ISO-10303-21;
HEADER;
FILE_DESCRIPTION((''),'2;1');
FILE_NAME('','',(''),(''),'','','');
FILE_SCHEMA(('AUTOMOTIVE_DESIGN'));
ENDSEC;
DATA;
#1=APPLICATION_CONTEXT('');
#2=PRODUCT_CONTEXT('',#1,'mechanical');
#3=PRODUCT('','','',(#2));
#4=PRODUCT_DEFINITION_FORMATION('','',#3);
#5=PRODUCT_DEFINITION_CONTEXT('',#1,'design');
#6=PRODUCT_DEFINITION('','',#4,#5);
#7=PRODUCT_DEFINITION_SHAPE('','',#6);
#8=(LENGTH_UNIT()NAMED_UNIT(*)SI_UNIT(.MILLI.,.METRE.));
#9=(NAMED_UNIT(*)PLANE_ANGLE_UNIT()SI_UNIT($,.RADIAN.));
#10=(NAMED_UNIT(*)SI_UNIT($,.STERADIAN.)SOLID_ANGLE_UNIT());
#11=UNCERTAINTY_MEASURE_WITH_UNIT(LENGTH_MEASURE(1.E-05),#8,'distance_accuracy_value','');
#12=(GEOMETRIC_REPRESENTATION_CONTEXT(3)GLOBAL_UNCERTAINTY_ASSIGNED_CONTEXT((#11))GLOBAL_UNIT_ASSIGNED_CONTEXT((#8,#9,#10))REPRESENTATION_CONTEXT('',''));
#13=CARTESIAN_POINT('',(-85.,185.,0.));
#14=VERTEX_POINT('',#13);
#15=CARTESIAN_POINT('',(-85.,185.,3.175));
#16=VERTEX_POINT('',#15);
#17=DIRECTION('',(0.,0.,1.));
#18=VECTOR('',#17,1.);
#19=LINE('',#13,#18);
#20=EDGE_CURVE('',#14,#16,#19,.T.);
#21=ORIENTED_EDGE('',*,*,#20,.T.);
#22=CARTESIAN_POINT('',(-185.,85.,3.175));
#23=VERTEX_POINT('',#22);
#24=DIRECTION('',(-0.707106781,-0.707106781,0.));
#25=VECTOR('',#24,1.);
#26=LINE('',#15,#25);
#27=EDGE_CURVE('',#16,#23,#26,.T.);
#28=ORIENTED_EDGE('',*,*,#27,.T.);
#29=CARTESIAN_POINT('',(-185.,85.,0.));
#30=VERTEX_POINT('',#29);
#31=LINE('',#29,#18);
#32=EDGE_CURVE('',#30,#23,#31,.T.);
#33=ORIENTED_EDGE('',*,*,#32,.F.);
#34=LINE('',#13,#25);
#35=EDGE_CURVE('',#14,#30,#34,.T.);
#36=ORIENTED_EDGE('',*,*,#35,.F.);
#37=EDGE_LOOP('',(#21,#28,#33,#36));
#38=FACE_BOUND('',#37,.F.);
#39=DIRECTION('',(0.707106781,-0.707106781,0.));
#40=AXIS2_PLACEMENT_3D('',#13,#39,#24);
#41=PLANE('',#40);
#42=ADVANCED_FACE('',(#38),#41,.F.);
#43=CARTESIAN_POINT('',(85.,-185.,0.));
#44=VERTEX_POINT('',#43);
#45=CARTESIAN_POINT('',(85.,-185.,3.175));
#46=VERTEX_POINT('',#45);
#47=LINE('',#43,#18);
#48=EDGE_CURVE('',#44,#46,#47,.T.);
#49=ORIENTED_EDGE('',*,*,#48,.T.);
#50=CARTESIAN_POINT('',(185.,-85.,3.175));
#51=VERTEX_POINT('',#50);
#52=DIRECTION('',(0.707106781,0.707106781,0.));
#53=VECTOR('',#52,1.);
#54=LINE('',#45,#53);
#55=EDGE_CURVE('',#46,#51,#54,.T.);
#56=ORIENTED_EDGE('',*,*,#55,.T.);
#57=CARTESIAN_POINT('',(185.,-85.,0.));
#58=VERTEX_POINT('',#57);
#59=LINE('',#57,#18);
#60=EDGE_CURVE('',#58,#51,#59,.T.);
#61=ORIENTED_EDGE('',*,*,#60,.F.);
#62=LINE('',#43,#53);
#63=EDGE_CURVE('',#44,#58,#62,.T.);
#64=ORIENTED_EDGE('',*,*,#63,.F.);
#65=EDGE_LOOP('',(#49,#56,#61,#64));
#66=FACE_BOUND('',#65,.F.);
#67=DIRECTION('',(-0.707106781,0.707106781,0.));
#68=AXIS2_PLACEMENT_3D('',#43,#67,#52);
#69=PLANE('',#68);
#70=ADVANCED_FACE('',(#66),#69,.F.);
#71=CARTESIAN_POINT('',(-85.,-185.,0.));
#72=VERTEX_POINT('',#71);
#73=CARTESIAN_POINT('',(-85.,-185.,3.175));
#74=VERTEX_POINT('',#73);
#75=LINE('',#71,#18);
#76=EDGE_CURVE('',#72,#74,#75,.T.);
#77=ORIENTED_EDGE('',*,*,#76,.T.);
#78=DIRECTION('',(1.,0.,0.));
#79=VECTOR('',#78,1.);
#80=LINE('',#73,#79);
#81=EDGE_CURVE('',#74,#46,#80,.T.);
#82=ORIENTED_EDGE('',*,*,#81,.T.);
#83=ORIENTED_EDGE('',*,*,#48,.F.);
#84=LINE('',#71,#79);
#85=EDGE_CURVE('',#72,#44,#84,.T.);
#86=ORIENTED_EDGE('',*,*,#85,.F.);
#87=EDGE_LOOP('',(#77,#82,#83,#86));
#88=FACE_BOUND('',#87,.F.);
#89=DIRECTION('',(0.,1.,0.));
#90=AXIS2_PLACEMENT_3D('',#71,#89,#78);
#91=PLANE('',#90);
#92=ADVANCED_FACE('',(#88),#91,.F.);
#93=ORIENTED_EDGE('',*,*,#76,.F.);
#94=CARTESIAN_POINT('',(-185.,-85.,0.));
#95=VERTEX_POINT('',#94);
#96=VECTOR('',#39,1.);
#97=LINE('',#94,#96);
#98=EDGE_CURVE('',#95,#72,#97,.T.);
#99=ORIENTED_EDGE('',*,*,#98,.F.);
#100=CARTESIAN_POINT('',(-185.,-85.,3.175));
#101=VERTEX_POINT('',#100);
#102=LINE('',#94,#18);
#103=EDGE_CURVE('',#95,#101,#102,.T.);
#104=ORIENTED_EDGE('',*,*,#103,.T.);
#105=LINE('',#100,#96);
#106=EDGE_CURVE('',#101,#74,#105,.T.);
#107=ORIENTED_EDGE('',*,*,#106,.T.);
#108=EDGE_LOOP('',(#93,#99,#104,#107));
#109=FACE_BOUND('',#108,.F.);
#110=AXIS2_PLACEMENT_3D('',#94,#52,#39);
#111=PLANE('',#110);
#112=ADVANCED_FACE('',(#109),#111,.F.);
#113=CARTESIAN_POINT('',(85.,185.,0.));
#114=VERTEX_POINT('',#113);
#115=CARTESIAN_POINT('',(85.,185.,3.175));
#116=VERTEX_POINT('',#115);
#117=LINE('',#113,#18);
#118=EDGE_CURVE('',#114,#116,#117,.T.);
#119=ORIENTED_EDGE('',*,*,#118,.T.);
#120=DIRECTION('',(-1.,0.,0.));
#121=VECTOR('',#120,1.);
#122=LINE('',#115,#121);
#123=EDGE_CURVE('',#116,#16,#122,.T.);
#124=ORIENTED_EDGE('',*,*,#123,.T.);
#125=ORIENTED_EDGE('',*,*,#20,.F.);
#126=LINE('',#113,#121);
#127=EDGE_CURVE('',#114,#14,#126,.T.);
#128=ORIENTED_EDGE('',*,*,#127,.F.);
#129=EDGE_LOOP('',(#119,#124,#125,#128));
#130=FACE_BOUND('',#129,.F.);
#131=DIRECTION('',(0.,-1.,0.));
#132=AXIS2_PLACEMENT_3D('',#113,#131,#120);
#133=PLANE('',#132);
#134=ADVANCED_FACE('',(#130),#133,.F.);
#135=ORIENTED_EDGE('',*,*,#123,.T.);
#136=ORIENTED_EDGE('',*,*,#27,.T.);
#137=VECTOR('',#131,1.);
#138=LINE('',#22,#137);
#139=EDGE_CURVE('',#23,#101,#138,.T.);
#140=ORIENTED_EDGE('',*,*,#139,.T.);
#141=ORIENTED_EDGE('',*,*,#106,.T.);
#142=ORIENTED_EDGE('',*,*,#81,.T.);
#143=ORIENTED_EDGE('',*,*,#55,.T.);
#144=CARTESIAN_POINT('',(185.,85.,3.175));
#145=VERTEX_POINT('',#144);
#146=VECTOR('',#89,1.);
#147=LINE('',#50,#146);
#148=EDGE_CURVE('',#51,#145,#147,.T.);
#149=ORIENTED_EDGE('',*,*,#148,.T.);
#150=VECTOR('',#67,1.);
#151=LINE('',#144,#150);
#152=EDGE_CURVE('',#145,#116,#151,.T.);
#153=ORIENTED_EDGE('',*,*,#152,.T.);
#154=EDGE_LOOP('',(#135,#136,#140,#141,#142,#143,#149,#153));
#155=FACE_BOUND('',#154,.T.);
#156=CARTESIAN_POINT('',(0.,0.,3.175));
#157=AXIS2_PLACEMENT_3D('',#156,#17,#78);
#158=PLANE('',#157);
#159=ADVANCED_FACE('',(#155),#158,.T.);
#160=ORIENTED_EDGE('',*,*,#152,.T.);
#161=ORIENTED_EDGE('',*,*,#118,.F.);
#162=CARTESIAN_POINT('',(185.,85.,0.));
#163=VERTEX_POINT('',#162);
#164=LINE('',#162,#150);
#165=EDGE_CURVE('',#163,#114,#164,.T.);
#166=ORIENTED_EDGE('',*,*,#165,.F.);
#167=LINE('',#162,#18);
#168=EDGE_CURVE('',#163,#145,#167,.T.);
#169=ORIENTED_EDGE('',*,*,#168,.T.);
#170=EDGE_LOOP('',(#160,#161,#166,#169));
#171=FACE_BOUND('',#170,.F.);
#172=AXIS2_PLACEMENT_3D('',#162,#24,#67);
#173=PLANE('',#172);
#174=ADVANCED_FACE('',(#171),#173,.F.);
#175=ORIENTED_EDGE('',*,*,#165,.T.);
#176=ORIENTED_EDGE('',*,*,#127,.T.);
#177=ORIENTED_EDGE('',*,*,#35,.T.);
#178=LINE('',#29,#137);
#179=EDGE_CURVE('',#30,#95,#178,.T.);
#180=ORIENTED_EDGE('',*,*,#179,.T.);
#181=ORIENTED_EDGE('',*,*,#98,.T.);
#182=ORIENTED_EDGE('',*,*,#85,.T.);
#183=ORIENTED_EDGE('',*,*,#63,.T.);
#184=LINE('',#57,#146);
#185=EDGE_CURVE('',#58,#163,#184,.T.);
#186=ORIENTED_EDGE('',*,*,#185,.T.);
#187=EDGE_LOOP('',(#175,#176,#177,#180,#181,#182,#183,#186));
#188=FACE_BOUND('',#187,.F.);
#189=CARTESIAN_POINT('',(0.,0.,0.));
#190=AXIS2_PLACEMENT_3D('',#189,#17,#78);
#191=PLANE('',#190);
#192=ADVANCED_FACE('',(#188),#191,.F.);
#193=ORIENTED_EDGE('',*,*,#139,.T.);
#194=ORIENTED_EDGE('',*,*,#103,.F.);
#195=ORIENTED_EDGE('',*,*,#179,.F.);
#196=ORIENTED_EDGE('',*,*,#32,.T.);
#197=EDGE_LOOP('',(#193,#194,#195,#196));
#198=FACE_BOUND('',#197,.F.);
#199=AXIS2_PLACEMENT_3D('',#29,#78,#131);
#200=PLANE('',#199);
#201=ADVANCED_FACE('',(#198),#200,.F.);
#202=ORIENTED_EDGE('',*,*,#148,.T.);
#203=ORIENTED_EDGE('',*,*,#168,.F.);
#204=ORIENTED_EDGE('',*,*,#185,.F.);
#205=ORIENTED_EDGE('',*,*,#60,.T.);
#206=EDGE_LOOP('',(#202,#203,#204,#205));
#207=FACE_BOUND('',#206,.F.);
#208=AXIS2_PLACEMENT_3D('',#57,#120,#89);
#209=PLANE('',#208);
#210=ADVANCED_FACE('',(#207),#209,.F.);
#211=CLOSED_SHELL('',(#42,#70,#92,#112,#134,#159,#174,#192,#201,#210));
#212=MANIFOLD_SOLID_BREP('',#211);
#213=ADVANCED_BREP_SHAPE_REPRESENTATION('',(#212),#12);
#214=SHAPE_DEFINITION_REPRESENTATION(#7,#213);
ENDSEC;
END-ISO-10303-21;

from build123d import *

# Parameters (mm, degrees)
F1_DEPTH = 3.175


# Not quite as in the source:
# - a length typed as a fraction of an inch, garbled in the dataset ("3 / 203.2 mm" for 3/8 in), is restored


with BuildPart() as f1:
    # F0 (on Top) → F1 (new body)
    with BuildSketch(Plane.XY):
        Polygon((-85, -185), (85, -185), (185, -85), (185, 85), (85, 185), (-85, 185), (-185, 85), (-185, -85), align=None)
    extrude(amount=F1_DEPTH)


solid = f1.part
